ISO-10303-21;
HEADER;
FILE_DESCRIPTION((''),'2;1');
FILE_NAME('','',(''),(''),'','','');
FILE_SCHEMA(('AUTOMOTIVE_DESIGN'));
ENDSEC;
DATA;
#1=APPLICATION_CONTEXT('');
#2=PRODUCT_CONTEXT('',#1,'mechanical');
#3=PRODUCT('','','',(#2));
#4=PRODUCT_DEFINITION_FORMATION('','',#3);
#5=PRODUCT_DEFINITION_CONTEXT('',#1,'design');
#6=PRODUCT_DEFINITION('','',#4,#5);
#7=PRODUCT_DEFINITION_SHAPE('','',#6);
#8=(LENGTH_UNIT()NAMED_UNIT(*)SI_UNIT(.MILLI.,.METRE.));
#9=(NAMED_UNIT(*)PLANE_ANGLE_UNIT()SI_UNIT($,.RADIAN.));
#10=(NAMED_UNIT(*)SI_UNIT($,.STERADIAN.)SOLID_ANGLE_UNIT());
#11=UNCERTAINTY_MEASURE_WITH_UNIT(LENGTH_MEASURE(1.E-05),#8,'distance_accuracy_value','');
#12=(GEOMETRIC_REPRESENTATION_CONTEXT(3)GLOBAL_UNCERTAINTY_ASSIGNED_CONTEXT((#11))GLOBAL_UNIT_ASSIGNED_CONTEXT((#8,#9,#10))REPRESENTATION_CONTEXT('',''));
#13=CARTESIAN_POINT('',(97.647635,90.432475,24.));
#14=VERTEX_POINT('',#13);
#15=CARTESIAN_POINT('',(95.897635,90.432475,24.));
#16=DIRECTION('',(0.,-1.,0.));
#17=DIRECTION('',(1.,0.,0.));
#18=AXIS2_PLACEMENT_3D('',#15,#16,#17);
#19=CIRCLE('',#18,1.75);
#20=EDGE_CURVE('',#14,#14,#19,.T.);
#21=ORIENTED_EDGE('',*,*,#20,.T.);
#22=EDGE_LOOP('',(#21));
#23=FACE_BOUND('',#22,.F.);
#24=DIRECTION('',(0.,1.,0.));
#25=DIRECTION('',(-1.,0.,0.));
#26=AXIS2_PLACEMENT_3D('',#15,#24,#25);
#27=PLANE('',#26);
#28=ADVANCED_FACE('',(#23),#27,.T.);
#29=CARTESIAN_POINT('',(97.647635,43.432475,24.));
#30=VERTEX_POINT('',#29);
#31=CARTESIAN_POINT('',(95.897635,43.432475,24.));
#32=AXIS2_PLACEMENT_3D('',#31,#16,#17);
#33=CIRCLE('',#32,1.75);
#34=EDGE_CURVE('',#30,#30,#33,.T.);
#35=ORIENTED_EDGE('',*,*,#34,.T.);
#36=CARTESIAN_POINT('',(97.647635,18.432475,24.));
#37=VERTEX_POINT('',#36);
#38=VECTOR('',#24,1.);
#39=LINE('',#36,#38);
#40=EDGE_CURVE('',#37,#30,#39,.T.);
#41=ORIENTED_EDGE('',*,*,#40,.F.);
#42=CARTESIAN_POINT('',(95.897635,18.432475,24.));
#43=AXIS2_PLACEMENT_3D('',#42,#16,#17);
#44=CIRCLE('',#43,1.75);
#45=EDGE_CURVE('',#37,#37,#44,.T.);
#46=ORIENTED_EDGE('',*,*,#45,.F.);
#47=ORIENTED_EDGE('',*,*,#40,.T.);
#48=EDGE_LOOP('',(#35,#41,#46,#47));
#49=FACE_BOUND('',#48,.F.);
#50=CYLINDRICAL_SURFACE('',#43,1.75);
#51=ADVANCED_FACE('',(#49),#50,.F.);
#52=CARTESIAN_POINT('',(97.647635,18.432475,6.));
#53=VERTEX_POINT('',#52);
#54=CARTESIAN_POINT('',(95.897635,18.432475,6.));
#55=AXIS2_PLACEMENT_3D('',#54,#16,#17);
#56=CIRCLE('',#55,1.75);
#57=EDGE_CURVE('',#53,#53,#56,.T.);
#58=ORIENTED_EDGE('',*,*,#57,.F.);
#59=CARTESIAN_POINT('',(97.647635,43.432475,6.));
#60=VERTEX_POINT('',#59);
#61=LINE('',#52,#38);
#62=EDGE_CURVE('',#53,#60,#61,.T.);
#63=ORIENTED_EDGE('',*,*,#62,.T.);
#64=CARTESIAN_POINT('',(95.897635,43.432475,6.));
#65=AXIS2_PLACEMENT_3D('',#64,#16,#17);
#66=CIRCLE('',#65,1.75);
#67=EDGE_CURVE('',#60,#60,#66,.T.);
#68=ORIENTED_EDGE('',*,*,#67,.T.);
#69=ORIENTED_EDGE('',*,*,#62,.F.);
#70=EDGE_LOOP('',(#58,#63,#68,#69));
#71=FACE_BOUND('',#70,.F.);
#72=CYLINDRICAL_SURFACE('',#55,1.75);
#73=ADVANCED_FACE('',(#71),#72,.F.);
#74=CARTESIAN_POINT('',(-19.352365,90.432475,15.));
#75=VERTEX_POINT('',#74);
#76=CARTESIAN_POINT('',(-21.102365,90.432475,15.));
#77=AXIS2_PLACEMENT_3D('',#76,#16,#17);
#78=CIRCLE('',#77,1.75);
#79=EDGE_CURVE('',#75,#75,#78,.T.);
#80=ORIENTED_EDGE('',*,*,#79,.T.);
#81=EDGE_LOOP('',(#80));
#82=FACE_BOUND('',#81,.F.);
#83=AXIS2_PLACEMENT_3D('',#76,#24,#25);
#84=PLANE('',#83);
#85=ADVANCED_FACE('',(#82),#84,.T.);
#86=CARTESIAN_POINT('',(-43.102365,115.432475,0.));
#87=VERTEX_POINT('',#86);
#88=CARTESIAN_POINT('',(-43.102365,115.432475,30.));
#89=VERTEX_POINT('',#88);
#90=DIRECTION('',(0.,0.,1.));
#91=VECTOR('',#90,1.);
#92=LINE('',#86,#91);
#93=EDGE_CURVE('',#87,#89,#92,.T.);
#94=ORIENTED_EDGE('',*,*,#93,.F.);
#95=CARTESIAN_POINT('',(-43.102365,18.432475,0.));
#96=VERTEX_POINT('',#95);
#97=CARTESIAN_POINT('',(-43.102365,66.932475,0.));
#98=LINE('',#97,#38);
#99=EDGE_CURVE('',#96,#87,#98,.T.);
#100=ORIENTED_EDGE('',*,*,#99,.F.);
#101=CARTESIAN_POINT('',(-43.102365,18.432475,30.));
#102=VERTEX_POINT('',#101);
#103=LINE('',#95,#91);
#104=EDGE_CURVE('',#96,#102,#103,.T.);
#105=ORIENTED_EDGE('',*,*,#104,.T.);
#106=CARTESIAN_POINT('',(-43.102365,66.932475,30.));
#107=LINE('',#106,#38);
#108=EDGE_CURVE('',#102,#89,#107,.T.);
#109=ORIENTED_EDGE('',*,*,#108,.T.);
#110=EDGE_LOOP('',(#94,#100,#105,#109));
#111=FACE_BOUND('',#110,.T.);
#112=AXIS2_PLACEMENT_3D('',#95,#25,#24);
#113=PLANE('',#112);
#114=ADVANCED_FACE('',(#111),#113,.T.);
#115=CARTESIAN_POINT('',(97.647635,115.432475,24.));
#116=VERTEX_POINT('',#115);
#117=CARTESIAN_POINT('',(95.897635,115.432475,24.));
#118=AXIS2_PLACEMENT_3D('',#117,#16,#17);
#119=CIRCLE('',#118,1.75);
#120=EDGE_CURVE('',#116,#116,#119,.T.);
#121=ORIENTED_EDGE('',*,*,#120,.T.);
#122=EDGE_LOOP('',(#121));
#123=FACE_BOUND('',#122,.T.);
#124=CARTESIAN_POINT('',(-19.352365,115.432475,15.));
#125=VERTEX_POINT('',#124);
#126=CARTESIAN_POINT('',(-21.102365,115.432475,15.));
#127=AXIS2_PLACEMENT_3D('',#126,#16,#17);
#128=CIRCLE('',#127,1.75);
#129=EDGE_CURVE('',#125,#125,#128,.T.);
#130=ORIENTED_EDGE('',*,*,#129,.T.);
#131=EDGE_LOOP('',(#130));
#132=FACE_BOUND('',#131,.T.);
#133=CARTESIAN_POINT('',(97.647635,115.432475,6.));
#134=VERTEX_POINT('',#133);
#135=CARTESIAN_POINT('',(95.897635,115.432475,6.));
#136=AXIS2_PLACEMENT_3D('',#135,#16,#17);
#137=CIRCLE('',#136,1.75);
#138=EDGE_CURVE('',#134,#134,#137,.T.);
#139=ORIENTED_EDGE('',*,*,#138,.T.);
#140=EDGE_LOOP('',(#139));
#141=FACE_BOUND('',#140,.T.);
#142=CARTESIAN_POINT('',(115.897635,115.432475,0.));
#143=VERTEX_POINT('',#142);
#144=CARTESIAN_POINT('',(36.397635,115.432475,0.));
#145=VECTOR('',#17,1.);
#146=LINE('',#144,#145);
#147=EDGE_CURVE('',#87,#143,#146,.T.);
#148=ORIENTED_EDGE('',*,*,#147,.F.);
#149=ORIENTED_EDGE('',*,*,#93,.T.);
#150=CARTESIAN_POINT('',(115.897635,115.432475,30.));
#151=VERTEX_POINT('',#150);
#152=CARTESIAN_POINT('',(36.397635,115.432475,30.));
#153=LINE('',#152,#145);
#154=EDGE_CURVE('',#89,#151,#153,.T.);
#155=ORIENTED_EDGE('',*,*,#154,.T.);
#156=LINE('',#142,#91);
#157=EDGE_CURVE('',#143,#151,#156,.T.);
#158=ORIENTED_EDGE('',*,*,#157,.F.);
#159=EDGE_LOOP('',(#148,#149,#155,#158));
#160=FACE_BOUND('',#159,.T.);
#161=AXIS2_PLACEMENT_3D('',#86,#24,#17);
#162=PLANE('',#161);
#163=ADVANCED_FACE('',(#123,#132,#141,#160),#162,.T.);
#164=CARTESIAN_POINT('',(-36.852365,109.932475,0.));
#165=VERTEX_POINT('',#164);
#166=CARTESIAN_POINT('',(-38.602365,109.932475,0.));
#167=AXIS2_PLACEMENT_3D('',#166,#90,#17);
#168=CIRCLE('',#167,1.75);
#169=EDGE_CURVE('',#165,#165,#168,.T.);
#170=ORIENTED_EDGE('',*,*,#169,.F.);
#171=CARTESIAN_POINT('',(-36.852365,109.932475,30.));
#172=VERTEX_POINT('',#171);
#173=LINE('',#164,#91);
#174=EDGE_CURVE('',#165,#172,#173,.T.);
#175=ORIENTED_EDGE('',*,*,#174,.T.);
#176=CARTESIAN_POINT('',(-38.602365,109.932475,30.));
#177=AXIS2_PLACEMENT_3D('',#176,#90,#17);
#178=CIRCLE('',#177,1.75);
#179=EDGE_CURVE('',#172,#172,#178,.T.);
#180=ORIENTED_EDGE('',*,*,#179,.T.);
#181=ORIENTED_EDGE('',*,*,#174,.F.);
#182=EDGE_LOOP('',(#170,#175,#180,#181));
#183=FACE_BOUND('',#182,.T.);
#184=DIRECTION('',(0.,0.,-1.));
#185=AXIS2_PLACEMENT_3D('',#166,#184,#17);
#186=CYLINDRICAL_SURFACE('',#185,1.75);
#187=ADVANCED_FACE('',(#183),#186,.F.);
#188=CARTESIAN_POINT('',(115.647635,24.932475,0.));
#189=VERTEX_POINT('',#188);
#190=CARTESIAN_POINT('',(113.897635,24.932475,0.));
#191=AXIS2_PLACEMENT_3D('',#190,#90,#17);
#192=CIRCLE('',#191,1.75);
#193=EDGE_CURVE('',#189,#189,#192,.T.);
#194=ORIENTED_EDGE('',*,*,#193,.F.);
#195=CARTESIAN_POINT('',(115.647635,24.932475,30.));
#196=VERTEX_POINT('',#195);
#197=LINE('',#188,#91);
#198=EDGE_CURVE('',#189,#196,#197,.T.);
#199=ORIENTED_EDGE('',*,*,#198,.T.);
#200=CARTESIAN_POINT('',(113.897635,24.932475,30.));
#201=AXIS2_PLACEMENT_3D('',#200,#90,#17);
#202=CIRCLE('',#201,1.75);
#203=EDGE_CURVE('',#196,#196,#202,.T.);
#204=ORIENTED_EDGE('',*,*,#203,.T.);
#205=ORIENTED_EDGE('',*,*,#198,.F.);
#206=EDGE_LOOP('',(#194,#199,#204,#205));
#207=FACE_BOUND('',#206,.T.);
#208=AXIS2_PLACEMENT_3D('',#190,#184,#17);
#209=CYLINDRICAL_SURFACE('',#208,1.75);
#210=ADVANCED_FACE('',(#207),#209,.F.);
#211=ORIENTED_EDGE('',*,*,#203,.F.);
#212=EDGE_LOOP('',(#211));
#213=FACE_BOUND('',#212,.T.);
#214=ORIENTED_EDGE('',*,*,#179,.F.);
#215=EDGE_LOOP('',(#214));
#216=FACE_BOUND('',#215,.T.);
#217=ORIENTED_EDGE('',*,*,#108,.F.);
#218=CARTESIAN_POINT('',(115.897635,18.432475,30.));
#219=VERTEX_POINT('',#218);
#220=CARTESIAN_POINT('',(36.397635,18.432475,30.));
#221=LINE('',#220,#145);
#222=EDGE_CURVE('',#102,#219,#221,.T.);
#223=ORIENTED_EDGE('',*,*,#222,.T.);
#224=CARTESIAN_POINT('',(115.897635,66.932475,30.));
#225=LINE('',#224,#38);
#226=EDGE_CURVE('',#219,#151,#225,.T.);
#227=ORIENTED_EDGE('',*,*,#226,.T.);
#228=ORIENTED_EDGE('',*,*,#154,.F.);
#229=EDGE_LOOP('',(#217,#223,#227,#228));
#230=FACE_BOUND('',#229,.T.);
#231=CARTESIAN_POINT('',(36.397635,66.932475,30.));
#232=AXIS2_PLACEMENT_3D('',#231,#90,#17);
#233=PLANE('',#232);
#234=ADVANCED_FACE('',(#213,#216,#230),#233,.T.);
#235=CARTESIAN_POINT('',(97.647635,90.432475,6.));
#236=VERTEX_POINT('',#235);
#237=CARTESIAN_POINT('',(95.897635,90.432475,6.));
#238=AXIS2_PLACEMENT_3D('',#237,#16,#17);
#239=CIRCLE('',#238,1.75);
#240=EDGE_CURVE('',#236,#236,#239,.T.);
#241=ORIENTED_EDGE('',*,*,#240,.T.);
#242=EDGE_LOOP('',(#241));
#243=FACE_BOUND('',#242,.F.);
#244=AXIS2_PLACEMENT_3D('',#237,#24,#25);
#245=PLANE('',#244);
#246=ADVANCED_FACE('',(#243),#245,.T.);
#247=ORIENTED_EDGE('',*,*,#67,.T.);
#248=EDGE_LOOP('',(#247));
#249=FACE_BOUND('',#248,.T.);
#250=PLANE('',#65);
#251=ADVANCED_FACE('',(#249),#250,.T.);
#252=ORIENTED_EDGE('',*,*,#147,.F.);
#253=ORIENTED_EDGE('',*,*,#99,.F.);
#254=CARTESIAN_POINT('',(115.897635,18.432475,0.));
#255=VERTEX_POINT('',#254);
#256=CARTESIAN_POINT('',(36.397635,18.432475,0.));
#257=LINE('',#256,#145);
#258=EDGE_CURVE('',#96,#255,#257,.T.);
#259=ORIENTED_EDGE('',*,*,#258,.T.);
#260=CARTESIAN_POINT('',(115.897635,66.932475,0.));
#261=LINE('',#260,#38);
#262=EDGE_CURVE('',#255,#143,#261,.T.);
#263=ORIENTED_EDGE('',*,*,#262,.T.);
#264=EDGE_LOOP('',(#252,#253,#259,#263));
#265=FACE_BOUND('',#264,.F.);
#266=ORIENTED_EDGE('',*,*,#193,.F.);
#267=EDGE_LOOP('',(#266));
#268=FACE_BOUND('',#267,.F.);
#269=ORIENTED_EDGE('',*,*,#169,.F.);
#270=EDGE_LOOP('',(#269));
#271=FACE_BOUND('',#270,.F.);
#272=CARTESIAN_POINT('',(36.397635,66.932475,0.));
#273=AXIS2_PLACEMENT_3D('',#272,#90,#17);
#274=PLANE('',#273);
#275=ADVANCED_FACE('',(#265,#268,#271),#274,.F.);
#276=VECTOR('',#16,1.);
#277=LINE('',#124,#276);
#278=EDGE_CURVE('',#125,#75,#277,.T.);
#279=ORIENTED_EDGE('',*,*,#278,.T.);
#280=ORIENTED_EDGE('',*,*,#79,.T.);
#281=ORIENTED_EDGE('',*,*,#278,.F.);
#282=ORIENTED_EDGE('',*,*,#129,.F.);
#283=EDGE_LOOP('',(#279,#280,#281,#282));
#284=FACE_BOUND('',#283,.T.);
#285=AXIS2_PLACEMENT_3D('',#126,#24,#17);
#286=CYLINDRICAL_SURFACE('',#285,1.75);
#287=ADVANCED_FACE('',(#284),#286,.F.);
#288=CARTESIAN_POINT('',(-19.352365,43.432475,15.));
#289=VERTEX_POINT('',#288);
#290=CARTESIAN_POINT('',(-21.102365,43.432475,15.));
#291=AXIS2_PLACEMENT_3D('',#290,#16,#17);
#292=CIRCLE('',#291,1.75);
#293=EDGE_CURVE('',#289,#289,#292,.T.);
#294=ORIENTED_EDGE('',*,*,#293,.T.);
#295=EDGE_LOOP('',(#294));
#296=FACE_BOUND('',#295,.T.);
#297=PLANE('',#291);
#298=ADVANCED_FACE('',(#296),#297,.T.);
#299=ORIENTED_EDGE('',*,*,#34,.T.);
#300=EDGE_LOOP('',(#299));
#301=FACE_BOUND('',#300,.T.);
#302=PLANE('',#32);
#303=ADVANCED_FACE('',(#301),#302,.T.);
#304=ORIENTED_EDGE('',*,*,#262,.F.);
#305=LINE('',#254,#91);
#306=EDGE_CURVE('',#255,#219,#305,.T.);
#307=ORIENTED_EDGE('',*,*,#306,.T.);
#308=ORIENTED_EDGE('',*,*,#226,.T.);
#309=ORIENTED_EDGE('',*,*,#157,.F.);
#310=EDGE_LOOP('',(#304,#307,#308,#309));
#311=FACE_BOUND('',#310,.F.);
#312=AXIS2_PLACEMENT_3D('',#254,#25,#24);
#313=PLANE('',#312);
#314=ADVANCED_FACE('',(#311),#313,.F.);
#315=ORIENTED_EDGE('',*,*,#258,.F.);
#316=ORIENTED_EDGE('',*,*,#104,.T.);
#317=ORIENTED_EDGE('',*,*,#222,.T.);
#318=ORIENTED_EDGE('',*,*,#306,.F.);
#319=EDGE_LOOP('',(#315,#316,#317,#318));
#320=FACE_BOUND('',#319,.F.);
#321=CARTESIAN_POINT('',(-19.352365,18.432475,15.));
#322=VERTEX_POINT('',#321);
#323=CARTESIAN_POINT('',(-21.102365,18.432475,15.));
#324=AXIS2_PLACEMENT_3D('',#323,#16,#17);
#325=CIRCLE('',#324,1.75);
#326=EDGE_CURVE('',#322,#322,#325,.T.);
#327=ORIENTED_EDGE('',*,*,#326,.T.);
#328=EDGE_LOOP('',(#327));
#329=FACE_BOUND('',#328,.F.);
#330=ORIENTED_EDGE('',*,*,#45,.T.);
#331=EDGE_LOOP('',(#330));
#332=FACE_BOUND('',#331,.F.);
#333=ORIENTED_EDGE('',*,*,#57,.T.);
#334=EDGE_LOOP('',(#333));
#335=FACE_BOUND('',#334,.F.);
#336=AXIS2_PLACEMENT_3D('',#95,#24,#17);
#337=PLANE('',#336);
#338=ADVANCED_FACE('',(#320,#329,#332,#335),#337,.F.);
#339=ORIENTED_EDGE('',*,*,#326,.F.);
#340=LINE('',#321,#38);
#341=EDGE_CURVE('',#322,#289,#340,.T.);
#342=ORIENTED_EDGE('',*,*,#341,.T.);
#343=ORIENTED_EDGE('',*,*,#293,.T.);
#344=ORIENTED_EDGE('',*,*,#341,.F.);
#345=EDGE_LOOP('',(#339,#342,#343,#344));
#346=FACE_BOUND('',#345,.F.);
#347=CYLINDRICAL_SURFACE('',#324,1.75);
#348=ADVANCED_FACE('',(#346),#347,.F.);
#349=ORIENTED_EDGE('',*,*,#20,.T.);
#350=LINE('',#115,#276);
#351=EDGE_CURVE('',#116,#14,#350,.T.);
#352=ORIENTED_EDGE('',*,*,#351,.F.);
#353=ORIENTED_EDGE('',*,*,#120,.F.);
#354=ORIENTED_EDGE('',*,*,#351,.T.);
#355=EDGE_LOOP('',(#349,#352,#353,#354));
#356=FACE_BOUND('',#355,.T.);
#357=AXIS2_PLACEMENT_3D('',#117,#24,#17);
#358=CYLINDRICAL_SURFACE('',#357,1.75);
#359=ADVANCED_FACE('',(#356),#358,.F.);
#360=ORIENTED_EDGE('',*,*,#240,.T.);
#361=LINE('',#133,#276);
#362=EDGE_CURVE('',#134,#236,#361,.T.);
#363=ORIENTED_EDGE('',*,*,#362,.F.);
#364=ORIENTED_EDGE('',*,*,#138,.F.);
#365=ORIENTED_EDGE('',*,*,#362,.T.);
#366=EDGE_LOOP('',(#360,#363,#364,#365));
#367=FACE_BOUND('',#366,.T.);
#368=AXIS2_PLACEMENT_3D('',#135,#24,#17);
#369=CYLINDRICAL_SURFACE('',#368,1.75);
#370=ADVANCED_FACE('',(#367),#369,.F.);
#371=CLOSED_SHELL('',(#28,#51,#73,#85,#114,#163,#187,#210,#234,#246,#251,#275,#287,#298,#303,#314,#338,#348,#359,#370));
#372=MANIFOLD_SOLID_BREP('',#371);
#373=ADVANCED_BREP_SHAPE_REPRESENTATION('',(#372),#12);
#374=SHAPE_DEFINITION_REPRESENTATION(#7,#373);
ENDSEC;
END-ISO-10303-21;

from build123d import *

# Parameters (mm, degrees)
F0_W     = 159
F0_H     = 97
F0_R     = 1.75
F1_DEPTH = 30
F2_R     = 1.75
F3_DEPTH = 25


# Not quite as in the source:
# - a pattern or mirror of a feature is missing from the dataset's text; its kind, count and spacing are read off the source's solid


with BuildPart() as f1:
    # F0 (on Top) → F1 (new body)
    with BuildSketch(Plane.XY):
        with Locations((36.3976350129, 66.932474792)):
            Rectangle(F0_W, F0_H)
        with Locations((113.8976350129, 24.932474792)):
            Circle(F0_R, mode=Mode.SUBTRACT)
        with Locations((-38.6023649871, 109.932474792)):
            Circle(F0_R, mode=Mode.SUBTRACT)
    extrude(amount=F1_DEPTH)

    # F2 (on face) → F3 (cut)
    with BuildSketch(Plane.XZ.offset(-18.432474792)):
        with Locations((-21.1023649871, 15)):
            Circle(F2_R)
        with Locations((95.8976350129, 24)):
            Circle(F2_R)
        with Locations((95.8976350129, 6)):
            Circle(F2_R)
    f3 = extrude(amount=-F3_DEPTH, mode=Mode.SUBTRACT)

    # F3_copies: F3 across plane
    add(f3.mirror(Plane.ZX.offset(66.932475)), mode=Mode.SUBTRACT)


solid = f1.part
